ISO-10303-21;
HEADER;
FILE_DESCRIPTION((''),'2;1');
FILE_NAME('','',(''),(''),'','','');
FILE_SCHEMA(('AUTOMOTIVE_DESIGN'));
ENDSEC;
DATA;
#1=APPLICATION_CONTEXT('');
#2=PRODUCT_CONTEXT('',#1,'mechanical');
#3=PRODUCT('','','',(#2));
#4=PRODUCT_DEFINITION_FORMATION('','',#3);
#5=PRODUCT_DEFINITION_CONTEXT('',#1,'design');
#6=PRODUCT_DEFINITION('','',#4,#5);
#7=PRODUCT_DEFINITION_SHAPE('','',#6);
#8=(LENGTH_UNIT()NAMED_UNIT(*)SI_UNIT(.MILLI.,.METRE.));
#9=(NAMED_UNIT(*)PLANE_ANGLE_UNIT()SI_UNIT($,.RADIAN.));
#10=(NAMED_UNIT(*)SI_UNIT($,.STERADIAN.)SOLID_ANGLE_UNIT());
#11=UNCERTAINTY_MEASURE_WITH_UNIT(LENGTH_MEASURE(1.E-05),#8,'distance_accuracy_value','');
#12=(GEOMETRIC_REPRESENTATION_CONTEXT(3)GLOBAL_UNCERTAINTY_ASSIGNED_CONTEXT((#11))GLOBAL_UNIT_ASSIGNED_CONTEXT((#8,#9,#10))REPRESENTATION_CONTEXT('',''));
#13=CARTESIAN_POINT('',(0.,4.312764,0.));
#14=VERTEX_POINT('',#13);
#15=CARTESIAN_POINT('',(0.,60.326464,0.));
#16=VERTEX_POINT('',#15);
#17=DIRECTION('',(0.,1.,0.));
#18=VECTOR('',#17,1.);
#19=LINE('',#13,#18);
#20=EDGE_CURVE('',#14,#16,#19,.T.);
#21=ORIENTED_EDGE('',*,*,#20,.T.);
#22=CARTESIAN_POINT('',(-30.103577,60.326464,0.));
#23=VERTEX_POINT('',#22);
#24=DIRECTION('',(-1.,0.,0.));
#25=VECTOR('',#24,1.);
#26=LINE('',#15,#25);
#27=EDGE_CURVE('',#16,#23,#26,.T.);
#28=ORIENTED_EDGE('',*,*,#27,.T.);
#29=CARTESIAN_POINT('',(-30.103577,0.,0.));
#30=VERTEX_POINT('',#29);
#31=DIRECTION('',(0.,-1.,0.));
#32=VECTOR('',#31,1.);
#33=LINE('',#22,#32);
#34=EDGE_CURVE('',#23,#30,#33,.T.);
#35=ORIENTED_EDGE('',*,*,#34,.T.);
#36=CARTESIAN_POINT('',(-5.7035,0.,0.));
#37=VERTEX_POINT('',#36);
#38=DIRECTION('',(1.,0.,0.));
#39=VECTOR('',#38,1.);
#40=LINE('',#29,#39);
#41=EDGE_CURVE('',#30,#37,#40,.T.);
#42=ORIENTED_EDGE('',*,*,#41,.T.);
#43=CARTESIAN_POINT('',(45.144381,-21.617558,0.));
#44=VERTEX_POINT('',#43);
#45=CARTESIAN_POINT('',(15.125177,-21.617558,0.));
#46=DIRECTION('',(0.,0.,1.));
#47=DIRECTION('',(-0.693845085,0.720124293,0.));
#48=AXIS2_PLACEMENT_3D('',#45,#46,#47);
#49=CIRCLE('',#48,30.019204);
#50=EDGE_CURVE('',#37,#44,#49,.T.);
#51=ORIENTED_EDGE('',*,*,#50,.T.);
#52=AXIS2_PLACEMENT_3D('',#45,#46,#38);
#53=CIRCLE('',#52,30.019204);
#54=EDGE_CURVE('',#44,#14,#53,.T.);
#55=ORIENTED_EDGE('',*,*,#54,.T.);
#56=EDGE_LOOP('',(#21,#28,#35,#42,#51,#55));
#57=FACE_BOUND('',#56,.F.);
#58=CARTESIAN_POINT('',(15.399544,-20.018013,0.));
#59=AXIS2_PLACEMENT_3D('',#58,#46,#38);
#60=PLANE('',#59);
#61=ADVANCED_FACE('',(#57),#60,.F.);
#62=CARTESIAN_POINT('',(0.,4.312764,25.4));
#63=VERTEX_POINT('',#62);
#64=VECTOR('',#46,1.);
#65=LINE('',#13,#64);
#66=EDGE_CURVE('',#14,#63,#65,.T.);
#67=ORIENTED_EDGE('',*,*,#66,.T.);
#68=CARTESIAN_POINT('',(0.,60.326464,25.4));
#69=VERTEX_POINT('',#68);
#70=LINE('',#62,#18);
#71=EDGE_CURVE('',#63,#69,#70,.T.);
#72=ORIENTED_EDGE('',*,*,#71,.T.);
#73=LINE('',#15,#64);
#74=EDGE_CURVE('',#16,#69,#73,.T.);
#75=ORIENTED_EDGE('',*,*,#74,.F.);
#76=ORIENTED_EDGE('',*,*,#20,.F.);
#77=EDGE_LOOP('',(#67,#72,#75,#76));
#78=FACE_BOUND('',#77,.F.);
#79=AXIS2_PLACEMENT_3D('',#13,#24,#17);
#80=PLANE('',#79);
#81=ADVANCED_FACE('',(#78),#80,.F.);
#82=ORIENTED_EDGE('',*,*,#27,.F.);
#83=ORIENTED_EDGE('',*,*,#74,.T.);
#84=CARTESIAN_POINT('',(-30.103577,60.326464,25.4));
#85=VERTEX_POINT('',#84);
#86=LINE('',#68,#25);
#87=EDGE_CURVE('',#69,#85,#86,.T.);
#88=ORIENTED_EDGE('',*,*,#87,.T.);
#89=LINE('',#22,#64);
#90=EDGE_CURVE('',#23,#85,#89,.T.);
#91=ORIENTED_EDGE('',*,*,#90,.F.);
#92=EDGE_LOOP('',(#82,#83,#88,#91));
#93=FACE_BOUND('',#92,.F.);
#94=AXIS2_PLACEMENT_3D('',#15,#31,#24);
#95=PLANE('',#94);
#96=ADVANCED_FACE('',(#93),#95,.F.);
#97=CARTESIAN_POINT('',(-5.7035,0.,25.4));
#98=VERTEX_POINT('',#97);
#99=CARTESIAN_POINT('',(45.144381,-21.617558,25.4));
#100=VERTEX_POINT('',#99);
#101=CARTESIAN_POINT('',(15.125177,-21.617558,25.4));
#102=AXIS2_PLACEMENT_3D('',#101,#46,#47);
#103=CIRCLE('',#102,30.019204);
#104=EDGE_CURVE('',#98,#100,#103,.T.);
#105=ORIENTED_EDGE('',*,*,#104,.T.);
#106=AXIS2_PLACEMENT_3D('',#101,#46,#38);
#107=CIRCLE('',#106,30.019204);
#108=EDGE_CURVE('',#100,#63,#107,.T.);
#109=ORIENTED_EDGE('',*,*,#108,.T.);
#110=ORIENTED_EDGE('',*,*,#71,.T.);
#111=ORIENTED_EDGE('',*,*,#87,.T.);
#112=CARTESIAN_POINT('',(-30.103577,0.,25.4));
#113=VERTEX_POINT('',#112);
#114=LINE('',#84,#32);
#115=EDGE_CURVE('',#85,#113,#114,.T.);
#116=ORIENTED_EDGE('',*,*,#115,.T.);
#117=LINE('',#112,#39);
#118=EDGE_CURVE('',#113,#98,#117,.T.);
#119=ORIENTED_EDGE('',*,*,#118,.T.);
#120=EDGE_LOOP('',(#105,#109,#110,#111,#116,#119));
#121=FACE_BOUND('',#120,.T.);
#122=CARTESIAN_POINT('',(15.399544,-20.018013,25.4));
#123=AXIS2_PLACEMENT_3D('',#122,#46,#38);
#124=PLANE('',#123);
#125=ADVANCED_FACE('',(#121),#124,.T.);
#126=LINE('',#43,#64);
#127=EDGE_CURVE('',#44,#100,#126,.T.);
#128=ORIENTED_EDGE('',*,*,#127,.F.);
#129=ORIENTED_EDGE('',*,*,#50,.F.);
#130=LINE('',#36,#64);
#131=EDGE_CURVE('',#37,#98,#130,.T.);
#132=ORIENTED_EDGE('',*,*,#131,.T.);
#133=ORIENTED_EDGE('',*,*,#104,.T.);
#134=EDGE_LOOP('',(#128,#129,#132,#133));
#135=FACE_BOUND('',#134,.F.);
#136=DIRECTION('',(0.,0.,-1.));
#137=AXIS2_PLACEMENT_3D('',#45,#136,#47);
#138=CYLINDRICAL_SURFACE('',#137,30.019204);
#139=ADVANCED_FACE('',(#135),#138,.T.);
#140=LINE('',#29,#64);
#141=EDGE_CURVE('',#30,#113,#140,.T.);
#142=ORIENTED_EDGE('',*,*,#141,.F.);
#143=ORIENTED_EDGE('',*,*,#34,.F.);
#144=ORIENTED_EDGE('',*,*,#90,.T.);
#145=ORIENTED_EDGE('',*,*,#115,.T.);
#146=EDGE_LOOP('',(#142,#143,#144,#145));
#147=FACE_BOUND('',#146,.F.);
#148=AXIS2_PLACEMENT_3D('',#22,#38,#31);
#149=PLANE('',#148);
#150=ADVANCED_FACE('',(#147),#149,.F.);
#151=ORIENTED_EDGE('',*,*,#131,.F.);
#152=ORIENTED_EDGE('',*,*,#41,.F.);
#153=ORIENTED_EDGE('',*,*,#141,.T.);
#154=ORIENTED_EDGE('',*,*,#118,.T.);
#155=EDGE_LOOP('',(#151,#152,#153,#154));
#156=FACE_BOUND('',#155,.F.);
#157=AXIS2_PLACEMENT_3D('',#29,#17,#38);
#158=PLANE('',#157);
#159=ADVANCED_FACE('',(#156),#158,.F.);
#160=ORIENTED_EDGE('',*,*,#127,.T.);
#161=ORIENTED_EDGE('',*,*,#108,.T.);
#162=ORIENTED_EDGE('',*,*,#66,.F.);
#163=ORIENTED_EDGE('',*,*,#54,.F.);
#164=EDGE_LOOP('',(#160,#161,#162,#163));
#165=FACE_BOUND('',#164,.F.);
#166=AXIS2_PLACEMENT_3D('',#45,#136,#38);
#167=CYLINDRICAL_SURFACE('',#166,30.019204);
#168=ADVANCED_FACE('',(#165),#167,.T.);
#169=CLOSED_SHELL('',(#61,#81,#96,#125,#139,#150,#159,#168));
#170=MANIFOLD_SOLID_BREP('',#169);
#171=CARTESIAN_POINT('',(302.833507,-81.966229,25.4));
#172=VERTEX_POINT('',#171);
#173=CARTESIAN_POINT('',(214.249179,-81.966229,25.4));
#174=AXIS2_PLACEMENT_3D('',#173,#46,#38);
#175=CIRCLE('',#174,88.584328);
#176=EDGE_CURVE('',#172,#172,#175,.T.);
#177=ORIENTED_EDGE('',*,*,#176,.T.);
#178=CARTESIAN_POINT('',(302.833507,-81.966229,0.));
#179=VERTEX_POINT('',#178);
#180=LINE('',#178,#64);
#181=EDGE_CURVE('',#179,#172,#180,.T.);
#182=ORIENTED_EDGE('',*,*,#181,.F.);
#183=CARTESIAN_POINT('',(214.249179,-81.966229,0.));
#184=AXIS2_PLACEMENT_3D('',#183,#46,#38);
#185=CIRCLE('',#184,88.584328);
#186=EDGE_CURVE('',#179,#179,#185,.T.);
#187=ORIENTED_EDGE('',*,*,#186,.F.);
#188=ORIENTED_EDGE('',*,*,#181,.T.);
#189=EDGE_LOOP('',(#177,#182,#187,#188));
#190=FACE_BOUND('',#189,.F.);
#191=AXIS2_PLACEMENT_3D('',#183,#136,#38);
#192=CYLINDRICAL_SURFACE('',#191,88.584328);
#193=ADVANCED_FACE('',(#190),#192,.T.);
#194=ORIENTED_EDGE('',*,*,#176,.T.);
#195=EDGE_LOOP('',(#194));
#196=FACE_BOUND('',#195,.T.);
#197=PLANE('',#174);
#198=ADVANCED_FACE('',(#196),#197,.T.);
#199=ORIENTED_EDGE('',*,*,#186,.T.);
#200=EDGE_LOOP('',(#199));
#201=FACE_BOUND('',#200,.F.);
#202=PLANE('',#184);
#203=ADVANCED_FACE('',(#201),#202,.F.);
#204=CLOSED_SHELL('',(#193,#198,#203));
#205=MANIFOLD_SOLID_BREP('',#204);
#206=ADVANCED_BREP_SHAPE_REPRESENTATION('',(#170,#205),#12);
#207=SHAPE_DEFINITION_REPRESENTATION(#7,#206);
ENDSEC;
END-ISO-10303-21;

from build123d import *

# Parameters (mm, degrees)
F1_DEPTH = 25.4
F0_R     = 88.5843278601


# Not quite as in the source:
# - a feature names something its author has since deleted; it is built from what else it names


with BuildPart() as f1:
    # F0 (on Top) → F1 (new body)
    with BuildSketch(Plane.XY):
        with BuildLine():
            Line((0, 4.3127644618), (0, 0))
            Line((0, 0), (-5.7035000727, 0))
            ThreePointArc((-5.7035000727, 0), (3.3801290873, -49.2437491092), (45.144380568, -21.6175578535))
            ThreePointArc((45.144380568, -21.6175578535), (30.0768795363, 4.4131774043), (0, 4.3127644618))
        make_face()
        with BuildLine():
            Line((-5.7035000727, 0), (0, 0))
            Line((0, 0), (0, 4.3127644618))
            ThreePointArc((0, 4.3127644618), (-2.9806201388, 2.3268090291), (-5.7035000727, 0))
        make_face()
        with BuildLine():
            Line((-30.1035773009, 0), (-5.7035000727, 0))
            ThreePointArc((-5.7035000727, 0), (-2.9806201388, 2.3268090291), (0, 4.3127644618))
            Line((0, 4.3127644618), (0, 60.3264644742))
            Line((0, 60.3264644742), (-30.1035773009, 60.3264644742))
            Line((-30.1035773009, 60.3264644742), (-30.1035773009, 0))
        make_face()
    extrude(amount=F1_DEPTH)


with BuildPart() as f1b:
    # F0 (on Top) → F1, piece 2 (new body)
    with BuildSketch(Plane.XY):
        with Locations((214.2491787672, -81.9662287831)):
            Circle(F0_R)
    extrude(amount=F1_DEPTH)


solid = Compound([f1.part, f1b.part])
